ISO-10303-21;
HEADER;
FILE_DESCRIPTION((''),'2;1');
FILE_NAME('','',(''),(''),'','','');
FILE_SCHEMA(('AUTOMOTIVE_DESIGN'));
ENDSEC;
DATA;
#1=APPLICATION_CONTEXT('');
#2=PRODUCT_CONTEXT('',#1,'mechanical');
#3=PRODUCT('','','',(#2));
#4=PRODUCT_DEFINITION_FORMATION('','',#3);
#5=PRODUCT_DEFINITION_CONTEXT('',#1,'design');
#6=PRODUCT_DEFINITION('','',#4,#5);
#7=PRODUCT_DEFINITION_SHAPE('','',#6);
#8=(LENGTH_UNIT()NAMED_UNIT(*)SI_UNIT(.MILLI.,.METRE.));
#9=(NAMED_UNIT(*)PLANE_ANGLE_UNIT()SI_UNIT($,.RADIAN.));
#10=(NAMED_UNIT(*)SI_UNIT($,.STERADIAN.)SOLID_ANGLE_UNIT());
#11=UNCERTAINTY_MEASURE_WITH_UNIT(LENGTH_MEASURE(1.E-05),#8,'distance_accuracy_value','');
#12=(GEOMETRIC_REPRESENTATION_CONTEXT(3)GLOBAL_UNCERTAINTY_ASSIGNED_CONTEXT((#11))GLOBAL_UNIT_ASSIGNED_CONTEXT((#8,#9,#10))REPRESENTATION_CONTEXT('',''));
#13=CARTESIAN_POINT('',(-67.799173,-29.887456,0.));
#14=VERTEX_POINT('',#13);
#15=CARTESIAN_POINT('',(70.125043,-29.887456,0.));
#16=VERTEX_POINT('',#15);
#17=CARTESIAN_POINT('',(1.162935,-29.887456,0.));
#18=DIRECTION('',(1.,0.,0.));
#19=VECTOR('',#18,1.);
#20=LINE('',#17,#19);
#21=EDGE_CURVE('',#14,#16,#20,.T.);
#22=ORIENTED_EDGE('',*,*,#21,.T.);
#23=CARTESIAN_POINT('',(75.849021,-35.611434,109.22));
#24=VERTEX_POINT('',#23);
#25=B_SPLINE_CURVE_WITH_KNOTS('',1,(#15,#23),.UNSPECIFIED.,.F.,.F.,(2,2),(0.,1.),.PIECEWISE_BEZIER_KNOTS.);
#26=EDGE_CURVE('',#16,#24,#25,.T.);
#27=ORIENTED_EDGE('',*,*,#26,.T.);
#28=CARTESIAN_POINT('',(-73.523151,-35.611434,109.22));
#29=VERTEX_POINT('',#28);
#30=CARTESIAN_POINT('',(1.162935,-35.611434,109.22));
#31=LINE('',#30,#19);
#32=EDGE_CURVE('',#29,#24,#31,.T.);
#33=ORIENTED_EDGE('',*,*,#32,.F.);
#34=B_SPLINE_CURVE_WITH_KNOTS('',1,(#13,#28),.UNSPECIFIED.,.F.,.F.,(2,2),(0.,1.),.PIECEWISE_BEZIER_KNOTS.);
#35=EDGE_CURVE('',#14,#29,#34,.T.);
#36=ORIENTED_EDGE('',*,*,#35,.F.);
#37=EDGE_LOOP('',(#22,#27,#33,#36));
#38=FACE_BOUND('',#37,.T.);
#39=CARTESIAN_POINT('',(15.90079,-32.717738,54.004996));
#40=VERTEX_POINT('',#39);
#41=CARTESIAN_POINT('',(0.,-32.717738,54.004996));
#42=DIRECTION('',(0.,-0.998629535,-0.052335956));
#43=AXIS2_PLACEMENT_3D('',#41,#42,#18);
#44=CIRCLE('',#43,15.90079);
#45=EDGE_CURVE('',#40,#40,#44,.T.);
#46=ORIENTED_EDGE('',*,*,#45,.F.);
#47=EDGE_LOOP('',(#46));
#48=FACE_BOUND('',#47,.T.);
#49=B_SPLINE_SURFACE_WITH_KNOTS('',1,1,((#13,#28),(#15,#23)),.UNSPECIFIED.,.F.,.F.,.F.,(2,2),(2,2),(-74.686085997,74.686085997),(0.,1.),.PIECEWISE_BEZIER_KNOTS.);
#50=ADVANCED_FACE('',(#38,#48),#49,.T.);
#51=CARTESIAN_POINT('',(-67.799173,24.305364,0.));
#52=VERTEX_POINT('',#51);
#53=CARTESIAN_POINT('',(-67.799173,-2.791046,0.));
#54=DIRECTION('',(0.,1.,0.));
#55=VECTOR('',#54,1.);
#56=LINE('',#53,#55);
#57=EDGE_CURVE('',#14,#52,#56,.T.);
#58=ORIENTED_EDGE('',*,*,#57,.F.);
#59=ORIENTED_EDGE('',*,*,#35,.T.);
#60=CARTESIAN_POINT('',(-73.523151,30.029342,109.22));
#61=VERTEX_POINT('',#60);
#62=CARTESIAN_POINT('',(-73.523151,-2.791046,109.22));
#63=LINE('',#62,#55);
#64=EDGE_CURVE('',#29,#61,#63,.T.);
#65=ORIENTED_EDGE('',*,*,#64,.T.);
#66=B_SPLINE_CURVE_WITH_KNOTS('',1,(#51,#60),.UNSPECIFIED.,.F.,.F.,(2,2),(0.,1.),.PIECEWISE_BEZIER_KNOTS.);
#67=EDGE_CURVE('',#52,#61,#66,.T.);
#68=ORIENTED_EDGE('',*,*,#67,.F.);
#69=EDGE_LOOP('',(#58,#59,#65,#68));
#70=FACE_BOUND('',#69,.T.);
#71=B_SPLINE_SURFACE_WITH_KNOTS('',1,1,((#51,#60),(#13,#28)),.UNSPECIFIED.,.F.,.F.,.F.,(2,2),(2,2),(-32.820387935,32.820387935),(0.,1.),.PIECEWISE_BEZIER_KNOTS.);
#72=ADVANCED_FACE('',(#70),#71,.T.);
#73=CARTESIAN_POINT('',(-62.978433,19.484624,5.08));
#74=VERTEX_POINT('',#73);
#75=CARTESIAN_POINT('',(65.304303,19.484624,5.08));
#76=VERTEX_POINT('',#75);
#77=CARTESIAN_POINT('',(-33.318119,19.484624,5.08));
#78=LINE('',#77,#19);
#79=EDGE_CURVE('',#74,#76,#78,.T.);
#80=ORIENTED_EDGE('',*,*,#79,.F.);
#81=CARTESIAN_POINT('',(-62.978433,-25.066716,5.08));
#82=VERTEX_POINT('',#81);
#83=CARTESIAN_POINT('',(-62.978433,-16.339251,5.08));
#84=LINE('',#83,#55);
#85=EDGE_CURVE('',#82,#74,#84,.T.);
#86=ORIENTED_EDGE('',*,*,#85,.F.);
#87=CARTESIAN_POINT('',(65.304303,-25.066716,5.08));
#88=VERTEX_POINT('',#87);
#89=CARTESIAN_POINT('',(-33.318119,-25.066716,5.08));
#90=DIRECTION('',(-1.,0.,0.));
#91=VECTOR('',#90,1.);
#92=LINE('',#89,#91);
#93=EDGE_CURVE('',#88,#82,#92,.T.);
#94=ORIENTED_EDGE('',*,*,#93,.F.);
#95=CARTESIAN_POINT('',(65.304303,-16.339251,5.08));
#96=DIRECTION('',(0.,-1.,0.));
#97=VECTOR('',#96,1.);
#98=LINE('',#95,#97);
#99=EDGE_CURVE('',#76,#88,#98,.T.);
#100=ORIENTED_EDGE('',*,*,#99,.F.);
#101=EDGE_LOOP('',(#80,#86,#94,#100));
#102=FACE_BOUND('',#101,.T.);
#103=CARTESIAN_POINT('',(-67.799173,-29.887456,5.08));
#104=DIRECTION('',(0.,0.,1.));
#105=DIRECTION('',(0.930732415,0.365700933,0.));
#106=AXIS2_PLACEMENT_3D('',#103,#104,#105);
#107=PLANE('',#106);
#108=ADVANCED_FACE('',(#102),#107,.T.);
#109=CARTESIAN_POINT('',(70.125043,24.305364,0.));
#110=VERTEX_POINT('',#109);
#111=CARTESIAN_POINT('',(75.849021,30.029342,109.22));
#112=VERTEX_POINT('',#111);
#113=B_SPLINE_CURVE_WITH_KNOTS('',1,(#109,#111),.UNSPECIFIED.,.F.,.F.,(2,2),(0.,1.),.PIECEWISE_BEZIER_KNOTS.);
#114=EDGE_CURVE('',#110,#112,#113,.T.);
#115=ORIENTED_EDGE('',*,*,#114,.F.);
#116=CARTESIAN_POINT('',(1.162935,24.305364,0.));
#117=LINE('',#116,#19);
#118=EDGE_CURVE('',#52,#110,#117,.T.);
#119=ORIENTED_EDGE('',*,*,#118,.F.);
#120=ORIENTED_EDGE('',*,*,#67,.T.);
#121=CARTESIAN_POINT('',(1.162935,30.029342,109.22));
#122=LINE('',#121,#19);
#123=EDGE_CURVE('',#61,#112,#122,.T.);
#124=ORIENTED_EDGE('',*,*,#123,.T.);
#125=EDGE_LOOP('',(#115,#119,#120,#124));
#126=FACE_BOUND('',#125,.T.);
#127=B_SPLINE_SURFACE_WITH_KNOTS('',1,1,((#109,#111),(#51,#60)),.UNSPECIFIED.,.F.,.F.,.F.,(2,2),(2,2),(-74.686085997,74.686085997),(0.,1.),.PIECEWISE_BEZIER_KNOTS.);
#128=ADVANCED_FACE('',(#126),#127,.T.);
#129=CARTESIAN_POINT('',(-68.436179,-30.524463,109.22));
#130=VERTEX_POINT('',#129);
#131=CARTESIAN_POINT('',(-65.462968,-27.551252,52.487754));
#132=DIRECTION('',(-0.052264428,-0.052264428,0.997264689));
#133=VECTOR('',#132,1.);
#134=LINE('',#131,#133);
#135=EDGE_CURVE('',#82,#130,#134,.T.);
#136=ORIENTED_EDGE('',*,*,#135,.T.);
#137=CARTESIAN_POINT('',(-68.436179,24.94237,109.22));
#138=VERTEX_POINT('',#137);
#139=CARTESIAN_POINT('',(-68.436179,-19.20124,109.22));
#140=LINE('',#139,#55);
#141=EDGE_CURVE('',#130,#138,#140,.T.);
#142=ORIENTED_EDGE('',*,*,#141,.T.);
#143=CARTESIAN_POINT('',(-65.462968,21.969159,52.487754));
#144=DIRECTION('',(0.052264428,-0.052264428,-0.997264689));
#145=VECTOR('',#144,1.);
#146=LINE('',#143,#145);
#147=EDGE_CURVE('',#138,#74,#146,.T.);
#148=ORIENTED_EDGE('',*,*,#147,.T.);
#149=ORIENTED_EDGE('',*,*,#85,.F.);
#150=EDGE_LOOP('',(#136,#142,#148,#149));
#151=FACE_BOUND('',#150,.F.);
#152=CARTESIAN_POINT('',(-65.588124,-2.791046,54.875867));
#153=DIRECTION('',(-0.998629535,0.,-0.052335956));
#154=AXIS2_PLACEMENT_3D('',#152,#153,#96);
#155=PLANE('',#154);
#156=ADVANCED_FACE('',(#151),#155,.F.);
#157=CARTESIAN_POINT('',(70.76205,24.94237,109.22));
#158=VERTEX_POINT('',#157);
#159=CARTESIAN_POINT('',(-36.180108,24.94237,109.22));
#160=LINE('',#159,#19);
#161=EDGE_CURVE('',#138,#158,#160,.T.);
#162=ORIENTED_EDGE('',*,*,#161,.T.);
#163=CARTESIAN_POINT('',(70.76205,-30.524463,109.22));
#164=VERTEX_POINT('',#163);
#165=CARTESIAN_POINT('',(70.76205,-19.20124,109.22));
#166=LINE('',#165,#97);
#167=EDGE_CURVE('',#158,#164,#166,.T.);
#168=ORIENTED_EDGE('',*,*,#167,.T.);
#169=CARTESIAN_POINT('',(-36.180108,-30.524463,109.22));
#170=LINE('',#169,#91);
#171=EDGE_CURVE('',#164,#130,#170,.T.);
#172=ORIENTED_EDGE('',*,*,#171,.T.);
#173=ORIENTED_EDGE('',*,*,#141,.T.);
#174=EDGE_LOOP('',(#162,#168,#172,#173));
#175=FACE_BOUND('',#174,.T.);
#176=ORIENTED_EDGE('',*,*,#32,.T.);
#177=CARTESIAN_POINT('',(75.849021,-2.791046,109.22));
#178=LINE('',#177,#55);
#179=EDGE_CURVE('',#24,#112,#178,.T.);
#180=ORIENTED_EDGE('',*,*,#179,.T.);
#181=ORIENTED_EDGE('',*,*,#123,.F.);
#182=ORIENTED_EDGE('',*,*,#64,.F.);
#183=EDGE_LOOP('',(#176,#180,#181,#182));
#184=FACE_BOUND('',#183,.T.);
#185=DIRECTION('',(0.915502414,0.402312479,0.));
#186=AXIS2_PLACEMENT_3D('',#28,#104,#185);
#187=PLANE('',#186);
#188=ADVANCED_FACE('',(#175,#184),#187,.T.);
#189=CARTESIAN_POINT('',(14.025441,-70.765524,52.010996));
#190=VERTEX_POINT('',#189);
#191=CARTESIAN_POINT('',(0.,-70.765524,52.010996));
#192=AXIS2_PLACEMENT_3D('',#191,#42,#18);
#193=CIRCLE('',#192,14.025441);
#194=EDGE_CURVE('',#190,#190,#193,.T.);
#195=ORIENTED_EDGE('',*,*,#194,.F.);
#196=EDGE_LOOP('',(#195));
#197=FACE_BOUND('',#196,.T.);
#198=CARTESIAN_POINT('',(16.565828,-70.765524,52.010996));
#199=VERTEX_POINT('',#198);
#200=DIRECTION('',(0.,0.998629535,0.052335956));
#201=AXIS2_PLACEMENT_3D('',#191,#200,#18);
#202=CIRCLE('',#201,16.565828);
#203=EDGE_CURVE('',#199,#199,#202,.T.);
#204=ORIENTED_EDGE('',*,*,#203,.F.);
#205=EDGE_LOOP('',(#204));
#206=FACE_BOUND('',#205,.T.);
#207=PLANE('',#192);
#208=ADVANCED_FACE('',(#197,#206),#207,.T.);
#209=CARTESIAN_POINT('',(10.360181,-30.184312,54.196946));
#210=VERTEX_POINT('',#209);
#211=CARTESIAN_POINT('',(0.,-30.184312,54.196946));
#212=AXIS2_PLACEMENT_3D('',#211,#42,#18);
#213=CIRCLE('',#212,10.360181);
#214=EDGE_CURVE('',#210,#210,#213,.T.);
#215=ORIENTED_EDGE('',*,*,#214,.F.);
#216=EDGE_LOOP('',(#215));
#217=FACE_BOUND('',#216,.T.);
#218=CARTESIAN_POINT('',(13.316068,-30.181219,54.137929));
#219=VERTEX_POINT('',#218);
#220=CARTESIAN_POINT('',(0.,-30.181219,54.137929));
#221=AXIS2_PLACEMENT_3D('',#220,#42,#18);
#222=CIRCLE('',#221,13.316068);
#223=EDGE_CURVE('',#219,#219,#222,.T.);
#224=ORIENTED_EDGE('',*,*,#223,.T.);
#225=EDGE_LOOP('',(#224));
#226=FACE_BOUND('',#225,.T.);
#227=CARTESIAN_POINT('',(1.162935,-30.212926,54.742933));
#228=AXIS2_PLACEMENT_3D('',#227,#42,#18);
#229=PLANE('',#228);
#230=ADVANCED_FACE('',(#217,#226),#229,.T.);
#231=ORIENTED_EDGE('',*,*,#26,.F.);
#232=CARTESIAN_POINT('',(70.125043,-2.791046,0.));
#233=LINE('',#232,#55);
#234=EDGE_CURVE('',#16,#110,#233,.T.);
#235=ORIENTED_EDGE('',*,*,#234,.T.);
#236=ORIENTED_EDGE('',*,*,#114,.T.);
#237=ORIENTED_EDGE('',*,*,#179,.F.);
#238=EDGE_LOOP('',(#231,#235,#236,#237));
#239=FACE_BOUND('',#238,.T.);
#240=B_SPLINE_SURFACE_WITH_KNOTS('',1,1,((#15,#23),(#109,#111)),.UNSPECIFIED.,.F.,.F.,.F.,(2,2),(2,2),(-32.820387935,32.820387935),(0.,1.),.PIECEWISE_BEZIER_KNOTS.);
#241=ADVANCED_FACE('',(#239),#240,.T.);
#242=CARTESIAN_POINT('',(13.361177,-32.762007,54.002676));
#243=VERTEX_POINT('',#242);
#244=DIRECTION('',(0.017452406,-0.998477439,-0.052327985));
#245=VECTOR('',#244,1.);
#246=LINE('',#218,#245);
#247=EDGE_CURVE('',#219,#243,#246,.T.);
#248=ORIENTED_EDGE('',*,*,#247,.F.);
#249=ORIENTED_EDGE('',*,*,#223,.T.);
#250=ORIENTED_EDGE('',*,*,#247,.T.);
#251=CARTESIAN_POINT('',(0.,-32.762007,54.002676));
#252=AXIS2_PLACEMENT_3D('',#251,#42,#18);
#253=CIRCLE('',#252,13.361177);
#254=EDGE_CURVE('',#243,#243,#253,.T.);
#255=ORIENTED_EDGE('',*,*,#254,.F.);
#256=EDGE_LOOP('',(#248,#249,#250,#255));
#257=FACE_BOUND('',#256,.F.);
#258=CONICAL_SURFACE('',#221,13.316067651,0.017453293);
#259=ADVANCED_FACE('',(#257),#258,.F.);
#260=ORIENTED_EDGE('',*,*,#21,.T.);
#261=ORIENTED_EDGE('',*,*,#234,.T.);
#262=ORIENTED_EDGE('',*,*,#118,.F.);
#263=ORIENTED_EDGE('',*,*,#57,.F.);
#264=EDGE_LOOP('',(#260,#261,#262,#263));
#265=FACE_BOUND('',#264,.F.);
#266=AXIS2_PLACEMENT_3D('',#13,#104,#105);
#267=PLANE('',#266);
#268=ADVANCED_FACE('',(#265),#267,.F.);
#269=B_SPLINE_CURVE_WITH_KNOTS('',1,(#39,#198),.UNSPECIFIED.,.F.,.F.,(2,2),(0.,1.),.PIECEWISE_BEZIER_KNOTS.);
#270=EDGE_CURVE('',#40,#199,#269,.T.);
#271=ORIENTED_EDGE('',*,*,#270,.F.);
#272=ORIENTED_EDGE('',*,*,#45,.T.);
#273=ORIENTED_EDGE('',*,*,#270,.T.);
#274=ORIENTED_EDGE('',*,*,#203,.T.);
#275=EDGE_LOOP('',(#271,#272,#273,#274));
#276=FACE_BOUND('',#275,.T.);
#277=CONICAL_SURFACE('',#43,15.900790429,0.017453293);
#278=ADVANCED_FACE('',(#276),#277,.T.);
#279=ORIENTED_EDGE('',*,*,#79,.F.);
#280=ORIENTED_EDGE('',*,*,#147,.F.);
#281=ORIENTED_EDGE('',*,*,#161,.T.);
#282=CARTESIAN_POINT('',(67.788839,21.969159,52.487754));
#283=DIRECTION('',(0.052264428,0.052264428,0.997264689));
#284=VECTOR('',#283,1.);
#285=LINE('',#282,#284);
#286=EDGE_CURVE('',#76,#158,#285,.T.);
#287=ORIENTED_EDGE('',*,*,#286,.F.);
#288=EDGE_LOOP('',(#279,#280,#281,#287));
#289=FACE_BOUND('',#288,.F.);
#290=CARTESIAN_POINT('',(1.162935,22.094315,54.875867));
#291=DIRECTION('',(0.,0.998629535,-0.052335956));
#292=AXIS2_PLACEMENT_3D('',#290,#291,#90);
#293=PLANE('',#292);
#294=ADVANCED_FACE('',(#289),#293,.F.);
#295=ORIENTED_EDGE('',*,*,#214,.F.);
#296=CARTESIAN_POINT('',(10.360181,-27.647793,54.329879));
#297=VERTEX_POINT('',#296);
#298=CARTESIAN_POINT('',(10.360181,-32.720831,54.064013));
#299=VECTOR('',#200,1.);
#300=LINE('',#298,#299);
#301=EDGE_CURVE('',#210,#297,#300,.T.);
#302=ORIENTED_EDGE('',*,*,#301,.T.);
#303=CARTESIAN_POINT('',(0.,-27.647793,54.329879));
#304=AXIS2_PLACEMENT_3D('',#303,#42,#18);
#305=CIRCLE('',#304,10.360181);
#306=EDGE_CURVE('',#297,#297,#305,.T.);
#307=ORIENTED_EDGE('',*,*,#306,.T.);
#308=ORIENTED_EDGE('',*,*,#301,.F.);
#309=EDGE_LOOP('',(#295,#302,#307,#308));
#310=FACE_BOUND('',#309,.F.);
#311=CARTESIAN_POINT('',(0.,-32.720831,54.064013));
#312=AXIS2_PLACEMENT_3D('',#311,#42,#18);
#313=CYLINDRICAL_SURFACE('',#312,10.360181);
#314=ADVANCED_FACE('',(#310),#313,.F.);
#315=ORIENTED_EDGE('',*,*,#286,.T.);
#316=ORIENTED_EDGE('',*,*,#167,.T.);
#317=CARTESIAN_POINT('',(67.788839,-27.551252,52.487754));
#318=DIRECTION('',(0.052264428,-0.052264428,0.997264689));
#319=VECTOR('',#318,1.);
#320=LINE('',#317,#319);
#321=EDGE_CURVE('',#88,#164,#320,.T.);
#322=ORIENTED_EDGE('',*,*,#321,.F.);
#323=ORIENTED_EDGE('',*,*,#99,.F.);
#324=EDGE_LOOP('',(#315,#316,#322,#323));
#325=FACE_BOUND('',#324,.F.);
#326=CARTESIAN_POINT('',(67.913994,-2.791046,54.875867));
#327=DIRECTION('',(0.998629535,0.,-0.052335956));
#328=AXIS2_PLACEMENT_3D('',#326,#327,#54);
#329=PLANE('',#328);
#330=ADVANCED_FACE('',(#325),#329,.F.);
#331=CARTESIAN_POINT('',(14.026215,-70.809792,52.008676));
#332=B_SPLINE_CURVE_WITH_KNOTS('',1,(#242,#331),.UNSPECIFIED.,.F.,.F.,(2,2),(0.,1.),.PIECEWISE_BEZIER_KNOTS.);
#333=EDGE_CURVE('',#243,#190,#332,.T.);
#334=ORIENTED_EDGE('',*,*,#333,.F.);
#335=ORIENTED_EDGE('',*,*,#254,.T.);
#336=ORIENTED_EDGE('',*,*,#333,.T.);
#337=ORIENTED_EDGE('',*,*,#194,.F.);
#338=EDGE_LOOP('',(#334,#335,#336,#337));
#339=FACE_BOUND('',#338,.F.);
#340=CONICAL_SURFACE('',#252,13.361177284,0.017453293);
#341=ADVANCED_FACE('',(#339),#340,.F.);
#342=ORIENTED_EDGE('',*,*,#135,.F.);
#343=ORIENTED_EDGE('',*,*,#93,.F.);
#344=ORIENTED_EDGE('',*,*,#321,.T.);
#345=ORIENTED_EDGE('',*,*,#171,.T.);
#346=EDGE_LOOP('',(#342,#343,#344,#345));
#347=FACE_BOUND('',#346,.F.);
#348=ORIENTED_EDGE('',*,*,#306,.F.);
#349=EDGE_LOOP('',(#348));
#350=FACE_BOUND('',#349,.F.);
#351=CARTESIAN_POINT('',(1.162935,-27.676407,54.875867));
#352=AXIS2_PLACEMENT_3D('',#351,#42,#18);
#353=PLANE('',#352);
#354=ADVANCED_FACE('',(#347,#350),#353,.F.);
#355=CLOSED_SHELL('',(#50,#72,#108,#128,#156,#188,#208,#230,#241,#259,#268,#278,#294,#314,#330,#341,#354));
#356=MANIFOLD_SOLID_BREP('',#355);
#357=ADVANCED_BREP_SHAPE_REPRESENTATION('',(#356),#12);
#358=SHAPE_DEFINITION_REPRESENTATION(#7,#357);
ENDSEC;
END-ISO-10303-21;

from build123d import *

# Parameters (mm, degrees)
F0_W          = 137.9242166877
F0_H          = 54.1928205639
F1_DEPTH      = 109.22
F1_TAPER      = -3
F2_T          = -5.08
F3_R          = 15.9007904293
F4_DEPTH      = 38.1
F4_TAPER      = -1
F5_T          = 2.54
F5_T3_DEPTH   = 109.5056366308
F5_T5_DEPTH   = 133.3627366899
F5_T7_DEPTH   = 109.5056366308
F5_T9_DEPTH   = 49.6313405661
F5_T11_DEPTH  = 109.5056366308
F5_T13_DEPTH  = 109.5056366308
F6_R          = 10.3601813923
F7_DEPTH      = 28.194
F7_DEPTH_BACK = 25.4


# Not quite as in the source:
# - a shell that OpenCascade refuses in one call is made with other operations: the cavity is built on its own and cut out


with BuildPart() as f1:
    # F0 (on Top) → F1 (new body)
    with BuildSketch(Plane.XY):
        with Locations((1.1629350483, -2.7910461649)):
            Rectangle(F0_W, F0_H)
    extrude(amount=F1_DEPTH, taper=F1_TAPER)

    # F2
    f2_openings = [f1.faces().sort_by_distance(p)[0] for p in [
        (1.162935, -2.791046, 109.22),
    ]]
    offset(amount=F2_T, openings=f2_openings)

    # F3 (on face) → F4 (join)
    with BuildSketch(Plane(origin=(0, -29.8055931401, -1.5620449467), x_dir=(1, 0, 0), z_dir=(0, -0.9986295348, -0.0523359562))):
        with Locations((0, 55.6432977319)):
            Circle(F3_R)
    extrude(amount=F4_DEPTH, taper=F4_TAPER)

    # F5: shell of thickness 2.54, made by hand


with BuildPart() as f5_core1:
    # F5_t2: copy of F1
    add(f1.part)

    # the walls: a layer under each face that stays
    f5_faces = [f5_core1.faces().sort_by_distance(p)[0] for p in [
        (1.1629350483, 27.1673529437, 54.61),
        (1.1629350483, -2.7910461649, 0),
        (-70.6611621221, -2.7910461649, 54.61),
        (72.0872036906, 9.6217245219, 109.22),
        (72.9870322188, -2.7910461649, 54.61),
        (-45.4478013646, -30.8414527224, 18.2033333333),
        (1.1629350483, -27.7955895152, 57.15),
        (68.0331764605, -2.7910461649, 57.15),
        (1.1629350483, 22.2134971854, 57.15),
        (-65.7073063639, -2.7910461649, 57.15),
        (-16.2333094162, -51.7416309725, 53.0079956131),
        (1.1629350483, -2.7910461649, 5.08),
    ]]
    thicken(f5_faces, amount=-F5_T, mode=Mode.SUBTRACT)

    # F5_s4 → F5_t3 (cut)
    with BuildSketch(Plane(origin=(-0.3725269372, -0.3725269372, 7.1082374087), x_dir=(0.7071067812, -0.7071067812, 0), z_dir=(-0.0522644277, -0.0522644277, 0.9972646886))):
        Polygon((-26.8076320701, -61.6755807303), (-25.0140422716, -63.5100601973), (-26.8076320701, -65.2987439692), (-28.6012218685, -63.5100601973), align=None)
    extrude(amount=F5_T3_DEPTH, mode=Mode.SUBTRACT)

    # F5_s6 → F5_t5 (cut)
    with BuildSketch(Plane.YZ.offset(-65.5184332966)):
        Polygon((-25.0413512578, 5.1067293333), (-27.6032354663, 4.9470666711), (-27.4770864474, 2.54), (-25.066716448, 2.54), align=None)
        Polygon((19.4592589279, 5.1067293333), (22.0211431364, 4.9470666711), (21.8949941176, 2.54), (19.4846241181, 2.54), align=None)
    extrude(amount=F5_T5_DEPTH, mode=Mode.SUBTRACT)

    # F5_s8 → F5_t7 (cut)
    with BuildSketch(Plane(origin=(0.3788802151, -0.3788802151, 7.229465173), x_dir=(0.7071067812, 0.7071067812, 0), z_dir=(0.0522644277, -0.0522644277, 0.9972646886))):
        Polygon((28.4522705876, -63.3157206494), (26.6586807892, -65.1502001164), (28.4522705876, -66.9388838882), (30.245860386, -65.1502001164), align=None)
    extrude(amount=F5_T7_DEPTH, mode=Mode.SUBTRACT)

    # F5_s10 → F5_t9 (cut)
    with BuildSketch(Plane.XZ.offset(-22.0246241181)):
        Polygon((65.2789382031, 5.1067293333), (67.8408224115, 4.9470666711), (67.7146733927, 2.54), (65.3043033933, 2.54), align=None)
        Polygon((-62.9530681064, 5.1067293333), (-65.5149523149, 4.9470666711), (-65.388803296, 2.54), (-62.9784332966, 2.54), align=None)
    extrude(amount=F5_T9_DEPTH, mode=Mode.SUBTRACT)

    # F5_s12 → F5_t11 (cut)
    with BuildSketch(Plane(origin=(6.0868817641, 6.0868817641, 116.1446229433), x_dir=(0.7071067812, -0.7071067812, 0), z_dir=(-0.0522644277, -0.0522644277, -0.9972646886))):
        Polygon((32.3994059273, -59.3793819539), (34.1929957257, -61.2138614209), (32.3994059273, -63.0025451928), (30.6058161288, -61.2138614209), align=None)
    extrude(amount=F5_T11_DEPTH, mode=Mode.SUBTRACT)

    # F5_s14 → F5_t13 (cut)
    with BuildSketch(Plane(origin=(-0.357279059, 0.357279059, 6.8172905608), x_dir=(-0.7071067812, -0.7071067812, 0), z_dir=(-0.0522644277, 0.0522644277, 0.9972646886))):
        Polygon((30.7547674097, -57.7392420349), (28.9611776113, -59.5737215018), (30.7547674097, -61.3624052737), (32.5483572082, -59.5737215018), align=None)
    extrude(amount=F5_T13_DEPTH, mode=Mode.SUBTRACT)

    # F5_s15 → F5_t16 (revolve, cut)
    with BuildSketch(Plane(origin=(0, -2.9121451953, 55.5670405262), x_dir=(1, 0, 0), z_dir=(0, 0.0523359562, -0.9986295348))):
        Polygon((15.9261865608, 29.8714534354), (15.9007904293, 27.3064967266), (13.3160676512, 27.3064967266), (13.3611772836, 29.8908258389), align=None)
    revolve(axis=Axis((0, -32.7177383354, 54.0049955795), (0, -0.9986295348, -0.0523359562)), mode=Mode.SUBTRACT)


with BuildPart() as f1_1:
    add(f1.part)

    # what is left inside the walls is the cavity
    f5_cavity = [f5_core1.part.solids().sort_by_distance(p)[0] for p in [
        (-13.557203, -45.430288, 53.338759),
    ]]
    add(f5_cavity, mode=Mode.SUBTRACT)

    # F6 (on face) → F7 (cut, two sides)
    with BuildSketch(Plane(origin=(0, -29.8055931401, -1.5620449467), x_dir=(1, 0, 0), z_dir=(0, -0.9986295348, -0.0523359562))) as f7_sk:
        with Locations((0, 55.7023957372)):
            Circle(F6_R)
    extrude(amount=-F7_DEPTH, mode=Mode.SUBTRACT)
    extrude(f7_sk.sketch, amount=F7_DEPTH_BACK, mode=Mode.SUBTRACT)


solid = f1_1.part
